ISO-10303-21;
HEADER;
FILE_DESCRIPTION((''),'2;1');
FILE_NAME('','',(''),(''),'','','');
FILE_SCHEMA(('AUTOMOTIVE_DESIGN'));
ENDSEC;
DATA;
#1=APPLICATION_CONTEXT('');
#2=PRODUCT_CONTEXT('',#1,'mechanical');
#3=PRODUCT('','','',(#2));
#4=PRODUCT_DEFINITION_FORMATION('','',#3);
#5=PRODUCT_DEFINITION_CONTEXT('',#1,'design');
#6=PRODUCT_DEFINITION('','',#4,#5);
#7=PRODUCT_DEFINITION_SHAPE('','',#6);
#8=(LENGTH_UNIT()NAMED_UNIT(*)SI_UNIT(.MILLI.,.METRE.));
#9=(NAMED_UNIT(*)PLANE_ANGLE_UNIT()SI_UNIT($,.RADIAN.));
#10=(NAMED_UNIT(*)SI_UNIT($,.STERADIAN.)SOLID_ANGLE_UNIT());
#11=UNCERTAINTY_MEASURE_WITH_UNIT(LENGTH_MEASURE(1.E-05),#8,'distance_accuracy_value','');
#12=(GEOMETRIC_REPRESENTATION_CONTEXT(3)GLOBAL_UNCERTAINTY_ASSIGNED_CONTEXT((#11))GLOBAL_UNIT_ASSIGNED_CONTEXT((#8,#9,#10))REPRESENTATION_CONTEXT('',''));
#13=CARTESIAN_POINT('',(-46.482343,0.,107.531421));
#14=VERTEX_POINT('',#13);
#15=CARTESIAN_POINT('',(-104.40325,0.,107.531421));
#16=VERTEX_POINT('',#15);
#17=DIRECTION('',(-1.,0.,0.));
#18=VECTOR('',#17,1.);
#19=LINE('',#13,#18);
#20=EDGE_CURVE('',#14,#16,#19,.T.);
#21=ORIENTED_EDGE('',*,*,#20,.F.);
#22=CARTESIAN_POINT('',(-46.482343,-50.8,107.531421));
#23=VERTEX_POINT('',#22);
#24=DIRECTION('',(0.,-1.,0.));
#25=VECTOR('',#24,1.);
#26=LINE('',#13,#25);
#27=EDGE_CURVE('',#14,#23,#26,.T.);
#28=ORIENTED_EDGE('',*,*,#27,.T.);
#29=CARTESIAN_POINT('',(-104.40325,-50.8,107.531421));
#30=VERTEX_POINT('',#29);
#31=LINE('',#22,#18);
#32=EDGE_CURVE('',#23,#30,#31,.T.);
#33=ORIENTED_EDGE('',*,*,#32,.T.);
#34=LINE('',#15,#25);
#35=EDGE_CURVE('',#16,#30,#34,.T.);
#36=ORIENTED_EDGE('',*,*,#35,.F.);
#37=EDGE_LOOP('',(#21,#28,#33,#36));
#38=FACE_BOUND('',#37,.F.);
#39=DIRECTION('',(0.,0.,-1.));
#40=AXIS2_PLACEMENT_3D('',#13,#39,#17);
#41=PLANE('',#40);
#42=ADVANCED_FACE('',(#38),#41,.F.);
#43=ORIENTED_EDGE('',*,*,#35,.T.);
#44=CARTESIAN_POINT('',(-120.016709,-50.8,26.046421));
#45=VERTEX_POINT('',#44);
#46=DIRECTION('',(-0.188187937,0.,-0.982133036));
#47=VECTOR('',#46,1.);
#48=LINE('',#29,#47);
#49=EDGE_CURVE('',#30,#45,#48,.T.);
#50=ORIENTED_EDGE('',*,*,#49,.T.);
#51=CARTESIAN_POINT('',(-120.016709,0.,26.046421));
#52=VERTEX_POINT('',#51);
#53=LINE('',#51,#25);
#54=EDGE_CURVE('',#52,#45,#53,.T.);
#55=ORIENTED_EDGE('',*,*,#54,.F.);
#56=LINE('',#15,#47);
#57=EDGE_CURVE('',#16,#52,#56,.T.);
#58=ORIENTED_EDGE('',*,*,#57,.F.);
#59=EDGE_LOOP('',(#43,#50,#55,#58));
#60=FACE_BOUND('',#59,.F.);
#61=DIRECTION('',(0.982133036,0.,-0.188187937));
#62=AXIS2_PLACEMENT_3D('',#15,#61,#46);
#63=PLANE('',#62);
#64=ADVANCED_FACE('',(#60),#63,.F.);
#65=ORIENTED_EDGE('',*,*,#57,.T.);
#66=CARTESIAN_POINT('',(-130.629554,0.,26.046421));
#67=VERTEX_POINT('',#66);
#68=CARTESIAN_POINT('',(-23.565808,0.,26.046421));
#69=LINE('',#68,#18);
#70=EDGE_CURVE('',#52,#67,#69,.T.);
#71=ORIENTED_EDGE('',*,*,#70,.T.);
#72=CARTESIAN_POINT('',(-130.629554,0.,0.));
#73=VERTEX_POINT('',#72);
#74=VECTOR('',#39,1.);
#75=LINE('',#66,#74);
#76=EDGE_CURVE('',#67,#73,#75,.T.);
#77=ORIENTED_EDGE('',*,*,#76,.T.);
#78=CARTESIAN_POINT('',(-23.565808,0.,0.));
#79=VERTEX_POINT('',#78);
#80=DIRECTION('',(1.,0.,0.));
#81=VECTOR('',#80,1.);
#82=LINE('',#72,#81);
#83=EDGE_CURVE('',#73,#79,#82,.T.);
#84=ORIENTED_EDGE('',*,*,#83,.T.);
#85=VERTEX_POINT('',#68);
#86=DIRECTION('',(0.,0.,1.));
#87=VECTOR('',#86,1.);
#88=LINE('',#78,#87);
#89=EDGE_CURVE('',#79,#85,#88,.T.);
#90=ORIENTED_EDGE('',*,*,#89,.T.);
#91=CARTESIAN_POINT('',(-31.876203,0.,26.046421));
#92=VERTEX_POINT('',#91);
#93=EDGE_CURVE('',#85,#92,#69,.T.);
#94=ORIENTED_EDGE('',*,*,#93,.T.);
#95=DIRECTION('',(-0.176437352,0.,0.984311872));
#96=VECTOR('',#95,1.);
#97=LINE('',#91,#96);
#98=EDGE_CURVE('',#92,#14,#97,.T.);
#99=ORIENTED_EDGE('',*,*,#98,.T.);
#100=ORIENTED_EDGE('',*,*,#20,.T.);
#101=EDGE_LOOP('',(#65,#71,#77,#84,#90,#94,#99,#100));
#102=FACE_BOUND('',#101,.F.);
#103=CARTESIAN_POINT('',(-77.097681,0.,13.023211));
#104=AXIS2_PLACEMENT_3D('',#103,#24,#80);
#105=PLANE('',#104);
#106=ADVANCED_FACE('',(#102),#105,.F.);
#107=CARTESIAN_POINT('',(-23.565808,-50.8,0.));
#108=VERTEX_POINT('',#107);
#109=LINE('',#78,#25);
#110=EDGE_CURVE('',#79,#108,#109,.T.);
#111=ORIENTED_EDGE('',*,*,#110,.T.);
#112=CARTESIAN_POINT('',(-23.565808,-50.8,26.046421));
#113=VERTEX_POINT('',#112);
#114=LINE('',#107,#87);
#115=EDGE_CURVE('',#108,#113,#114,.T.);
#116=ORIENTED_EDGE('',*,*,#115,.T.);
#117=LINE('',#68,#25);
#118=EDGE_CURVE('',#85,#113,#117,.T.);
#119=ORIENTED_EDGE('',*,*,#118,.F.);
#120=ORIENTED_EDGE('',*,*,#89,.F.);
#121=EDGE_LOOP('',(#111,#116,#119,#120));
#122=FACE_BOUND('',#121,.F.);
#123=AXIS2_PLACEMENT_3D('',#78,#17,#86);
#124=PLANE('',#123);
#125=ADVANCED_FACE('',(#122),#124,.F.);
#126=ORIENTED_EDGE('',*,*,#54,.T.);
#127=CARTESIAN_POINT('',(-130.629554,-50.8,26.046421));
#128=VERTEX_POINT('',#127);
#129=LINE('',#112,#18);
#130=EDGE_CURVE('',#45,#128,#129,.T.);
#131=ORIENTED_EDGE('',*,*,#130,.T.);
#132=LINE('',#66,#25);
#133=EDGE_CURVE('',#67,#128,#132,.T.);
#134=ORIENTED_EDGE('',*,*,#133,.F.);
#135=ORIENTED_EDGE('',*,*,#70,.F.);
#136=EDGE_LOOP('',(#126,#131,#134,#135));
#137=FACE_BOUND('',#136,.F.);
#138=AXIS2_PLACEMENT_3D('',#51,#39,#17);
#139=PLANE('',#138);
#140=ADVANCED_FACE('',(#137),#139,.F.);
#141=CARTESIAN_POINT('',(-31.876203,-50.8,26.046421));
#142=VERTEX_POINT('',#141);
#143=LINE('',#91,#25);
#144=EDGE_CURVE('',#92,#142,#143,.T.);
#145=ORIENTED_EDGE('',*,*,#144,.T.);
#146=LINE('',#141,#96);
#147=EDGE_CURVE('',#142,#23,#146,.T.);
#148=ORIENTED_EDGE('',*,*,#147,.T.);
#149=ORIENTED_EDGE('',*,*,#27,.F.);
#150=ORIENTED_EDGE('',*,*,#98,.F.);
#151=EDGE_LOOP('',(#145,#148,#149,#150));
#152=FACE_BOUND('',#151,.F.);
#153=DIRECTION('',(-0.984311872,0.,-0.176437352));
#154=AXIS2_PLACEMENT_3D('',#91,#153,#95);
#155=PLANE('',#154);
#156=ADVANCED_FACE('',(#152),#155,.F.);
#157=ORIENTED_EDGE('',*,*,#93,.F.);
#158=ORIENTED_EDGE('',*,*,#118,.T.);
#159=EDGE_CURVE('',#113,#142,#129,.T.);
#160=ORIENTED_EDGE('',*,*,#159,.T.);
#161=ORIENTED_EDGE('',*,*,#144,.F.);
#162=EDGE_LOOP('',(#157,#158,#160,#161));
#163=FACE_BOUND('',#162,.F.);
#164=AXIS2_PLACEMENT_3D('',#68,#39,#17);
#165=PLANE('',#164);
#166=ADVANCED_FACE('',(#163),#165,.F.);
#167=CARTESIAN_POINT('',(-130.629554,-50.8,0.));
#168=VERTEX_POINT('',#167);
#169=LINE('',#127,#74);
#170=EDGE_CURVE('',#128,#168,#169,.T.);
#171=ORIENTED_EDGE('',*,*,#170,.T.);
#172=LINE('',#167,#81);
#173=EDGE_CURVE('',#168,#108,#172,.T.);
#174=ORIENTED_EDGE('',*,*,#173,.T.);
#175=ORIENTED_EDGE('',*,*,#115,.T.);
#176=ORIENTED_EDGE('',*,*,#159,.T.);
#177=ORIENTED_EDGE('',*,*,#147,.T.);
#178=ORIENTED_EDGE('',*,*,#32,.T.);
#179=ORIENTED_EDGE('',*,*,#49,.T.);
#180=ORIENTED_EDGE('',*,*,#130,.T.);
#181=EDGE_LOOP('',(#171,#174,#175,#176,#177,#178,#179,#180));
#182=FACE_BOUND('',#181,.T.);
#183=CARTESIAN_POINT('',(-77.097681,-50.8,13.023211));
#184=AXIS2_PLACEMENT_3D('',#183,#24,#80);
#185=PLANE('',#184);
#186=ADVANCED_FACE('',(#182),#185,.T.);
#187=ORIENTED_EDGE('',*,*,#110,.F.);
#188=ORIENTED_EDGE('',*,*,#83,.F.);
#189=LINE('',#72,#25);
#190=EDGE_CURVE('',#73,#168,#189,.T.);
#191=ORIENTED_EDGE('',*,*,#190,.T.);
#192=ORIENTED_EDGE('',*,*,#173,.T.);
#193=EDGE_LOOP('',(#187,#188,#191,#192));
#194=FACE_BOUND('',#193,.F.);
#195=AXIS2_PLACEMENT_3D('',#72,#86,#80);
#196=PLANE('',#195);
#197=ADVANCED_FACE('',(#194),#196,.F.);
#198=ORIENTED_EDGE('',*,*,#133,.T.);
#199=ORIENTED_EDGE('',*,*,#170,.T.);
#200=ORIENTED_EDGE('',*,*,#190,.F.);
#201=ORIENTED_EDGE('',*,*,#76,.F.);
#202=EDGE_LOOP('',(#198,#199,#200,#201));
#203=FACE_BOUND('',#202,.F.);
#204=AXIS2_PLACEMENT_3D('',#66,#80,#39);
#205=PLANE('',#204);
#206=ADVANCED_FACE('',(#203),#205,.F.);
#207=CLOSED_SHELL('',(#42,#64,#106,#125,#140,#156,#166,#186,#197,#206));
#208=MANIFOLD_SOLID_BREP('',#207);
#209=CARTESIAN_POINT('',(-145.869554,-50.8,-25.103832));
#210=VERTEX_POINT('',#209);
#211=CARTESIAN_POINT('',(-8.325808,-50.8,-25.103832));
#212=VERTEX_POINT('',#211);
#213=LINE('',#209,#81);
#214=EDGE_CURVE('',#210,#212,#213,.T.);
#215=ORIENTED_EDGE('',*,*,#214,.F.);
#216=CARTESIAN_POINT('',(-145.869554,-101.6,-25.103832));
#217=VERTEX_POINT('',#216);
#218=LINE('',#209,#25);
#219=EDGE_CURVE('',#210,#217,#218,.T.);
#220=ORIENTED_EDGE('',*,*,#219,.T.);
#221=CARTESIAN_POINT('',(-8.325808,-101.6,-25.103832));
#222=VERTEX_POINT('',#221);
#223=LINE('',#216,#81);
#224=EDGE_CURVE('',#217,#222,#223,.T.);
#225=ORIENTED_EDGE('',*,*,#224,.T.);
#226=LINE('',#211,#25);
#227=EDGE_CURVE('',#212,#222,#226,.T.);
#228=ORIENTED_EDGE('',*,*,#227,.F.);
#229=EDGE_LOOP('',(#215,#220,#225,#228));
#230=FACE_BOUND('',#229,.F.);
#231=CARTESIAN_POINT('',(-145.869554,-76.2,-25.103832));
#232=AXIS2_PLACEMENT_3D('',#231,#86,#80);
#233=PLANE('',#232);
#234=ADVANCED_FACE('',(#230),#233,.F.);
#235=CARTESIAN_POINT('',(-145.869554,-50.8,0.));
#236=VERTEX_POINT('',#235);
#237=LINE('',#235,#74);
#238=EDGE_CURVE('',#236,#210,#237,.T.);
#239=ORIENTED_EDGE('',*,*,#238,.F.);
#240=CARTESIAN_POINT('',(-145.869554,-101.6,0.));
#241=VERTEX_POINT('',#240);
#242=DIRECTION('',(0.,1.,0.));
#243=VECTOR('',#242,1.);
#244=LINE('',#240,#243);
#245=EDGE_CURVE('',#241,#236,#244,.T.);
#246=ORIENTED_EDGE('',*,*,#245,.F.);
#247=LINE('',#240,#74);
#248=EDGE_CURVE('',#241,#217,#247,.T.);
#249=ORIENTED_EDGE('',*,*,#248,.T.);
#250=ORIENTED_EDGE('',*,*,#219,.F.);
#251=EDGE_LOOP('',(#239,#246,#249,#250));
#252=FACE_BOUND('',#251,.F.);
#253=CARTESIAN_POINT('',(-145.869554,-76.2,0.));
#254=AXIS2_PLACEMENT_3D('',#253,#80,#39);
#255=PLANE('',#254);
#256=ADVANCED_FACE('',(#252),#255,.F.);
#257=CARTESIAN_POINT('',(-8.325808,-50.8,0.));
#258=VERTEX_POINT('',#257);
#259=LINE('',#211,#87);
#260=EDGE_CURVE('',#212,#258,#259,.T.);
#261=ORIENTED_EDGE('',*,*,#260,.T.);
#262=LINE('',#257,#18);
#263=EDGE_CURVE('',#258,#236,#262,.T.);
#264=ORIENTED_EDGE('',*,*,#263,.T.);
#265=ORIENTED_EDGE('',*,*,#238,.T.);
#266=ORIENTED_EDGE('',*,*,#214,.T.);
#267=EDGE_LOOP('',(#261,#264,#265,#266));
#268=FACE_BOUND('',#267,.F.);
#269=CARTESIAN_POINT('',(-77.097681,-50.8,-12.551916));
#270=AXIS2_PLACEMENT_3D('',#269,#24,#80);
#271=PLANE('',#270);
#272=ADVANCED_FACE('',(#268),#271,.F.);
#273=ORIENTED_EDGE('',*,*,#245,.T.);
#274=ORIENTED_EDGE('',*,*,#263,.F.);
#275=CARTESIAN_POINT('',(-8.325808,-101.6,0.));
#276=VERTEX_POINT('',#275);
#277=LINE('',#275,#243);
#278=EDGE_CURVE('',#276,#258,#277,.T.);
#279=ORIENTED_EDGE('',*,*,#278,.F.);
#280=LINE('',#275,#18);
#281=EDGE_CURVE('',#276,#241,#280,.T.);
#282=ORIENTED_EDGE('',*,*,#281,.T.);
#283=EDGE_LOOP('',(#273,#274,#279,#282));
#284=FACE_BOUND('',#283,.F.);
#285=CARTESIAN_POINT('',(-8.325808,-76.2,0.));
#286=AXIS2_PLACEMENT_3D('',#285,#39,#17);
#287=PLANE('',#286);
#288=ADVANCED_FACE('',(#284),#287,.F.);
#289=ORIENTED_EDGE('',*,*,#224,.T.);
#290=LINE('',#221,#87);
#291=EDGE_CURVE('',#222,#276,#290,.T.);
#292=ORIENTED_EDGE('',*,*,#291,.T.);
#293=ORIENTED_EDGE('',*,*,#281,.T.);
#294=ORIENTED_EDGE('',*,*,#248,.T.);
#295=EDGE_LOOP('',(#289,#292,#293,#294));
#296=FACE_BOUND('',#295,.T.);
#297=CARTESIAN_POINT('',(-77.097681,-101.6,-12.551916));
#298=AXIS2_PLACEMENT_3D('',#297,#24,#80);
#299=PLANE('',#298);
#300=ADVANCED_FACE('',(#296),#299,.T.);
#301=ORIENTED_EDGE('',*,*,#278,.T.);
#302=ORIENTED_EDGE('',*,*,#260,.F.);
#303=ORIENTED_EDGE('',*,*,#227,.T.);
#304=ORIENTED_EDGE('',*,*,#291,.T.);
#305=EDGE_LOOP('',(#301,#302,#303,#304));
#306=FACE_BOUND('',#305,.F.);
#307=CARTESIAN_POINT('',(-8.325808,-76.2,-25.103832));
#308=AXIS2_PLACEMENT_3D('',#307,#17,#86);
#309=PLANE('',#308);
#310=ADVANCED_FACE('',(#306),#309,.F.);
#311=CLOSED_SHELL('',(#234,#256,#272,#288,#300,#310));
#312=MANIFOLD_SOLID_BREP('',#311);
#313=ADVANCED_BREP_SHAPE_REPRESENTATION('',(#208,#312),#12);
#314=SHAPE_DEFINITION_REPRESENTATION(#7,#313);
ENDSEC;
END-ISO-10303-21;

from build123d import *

# Parameters (mm, degrees)
F1_DEPTH = 50.8
F3_DEPTH = 25.4
F5_DEPTH = 25.4


with BuildPart() as f1:
    # F0 (on Front) → F1 (new body)
    with BuildSketch(Plane.XZ):
        Polygon((-120.0167089701, 26.0464213789), (-130.6295543909, 26.0464213789), (-130.6295543909, 0), (-23.5658083111, 0), (-23.5658083111, 26.0464213789), (-31.8762026727, 26.0464213789), align=None)
        Polygon((-104.4032499194, 107.5314208865), (-120.0167089701, 26.0464213789), (-31.8762026727, 26.0464213789), (-46.4823432267, 107.5314208865), align=None)
    extrude(amount=F1_DEPTH)


with BuildPart() as f3:
    # F2 (on face) → F3 (new body)
    with BuildSketch(Plane.XZ.offset(50.8)):
        Polygon((-23.5658083111, 0), (-130.6295543909, 0), (-145.8695543909, 0), (-145.8695543909, -25.1038316637), (-8.3258083111, -25.1038316637), (-8.3258083111, 0), align=None)
    extrude(amount=F3_DEPTH)

    # F5 (add): a face of the model
    f5_faces = [f3.faces().sort_by_distance(p)[0] for p in [
        (-77.097681351, -76.2, -12.5519158319),
    ]]
    extrude(f5_faces, amount=F5_DEPTH)


solid = Compound([f1.part, f3.part])
